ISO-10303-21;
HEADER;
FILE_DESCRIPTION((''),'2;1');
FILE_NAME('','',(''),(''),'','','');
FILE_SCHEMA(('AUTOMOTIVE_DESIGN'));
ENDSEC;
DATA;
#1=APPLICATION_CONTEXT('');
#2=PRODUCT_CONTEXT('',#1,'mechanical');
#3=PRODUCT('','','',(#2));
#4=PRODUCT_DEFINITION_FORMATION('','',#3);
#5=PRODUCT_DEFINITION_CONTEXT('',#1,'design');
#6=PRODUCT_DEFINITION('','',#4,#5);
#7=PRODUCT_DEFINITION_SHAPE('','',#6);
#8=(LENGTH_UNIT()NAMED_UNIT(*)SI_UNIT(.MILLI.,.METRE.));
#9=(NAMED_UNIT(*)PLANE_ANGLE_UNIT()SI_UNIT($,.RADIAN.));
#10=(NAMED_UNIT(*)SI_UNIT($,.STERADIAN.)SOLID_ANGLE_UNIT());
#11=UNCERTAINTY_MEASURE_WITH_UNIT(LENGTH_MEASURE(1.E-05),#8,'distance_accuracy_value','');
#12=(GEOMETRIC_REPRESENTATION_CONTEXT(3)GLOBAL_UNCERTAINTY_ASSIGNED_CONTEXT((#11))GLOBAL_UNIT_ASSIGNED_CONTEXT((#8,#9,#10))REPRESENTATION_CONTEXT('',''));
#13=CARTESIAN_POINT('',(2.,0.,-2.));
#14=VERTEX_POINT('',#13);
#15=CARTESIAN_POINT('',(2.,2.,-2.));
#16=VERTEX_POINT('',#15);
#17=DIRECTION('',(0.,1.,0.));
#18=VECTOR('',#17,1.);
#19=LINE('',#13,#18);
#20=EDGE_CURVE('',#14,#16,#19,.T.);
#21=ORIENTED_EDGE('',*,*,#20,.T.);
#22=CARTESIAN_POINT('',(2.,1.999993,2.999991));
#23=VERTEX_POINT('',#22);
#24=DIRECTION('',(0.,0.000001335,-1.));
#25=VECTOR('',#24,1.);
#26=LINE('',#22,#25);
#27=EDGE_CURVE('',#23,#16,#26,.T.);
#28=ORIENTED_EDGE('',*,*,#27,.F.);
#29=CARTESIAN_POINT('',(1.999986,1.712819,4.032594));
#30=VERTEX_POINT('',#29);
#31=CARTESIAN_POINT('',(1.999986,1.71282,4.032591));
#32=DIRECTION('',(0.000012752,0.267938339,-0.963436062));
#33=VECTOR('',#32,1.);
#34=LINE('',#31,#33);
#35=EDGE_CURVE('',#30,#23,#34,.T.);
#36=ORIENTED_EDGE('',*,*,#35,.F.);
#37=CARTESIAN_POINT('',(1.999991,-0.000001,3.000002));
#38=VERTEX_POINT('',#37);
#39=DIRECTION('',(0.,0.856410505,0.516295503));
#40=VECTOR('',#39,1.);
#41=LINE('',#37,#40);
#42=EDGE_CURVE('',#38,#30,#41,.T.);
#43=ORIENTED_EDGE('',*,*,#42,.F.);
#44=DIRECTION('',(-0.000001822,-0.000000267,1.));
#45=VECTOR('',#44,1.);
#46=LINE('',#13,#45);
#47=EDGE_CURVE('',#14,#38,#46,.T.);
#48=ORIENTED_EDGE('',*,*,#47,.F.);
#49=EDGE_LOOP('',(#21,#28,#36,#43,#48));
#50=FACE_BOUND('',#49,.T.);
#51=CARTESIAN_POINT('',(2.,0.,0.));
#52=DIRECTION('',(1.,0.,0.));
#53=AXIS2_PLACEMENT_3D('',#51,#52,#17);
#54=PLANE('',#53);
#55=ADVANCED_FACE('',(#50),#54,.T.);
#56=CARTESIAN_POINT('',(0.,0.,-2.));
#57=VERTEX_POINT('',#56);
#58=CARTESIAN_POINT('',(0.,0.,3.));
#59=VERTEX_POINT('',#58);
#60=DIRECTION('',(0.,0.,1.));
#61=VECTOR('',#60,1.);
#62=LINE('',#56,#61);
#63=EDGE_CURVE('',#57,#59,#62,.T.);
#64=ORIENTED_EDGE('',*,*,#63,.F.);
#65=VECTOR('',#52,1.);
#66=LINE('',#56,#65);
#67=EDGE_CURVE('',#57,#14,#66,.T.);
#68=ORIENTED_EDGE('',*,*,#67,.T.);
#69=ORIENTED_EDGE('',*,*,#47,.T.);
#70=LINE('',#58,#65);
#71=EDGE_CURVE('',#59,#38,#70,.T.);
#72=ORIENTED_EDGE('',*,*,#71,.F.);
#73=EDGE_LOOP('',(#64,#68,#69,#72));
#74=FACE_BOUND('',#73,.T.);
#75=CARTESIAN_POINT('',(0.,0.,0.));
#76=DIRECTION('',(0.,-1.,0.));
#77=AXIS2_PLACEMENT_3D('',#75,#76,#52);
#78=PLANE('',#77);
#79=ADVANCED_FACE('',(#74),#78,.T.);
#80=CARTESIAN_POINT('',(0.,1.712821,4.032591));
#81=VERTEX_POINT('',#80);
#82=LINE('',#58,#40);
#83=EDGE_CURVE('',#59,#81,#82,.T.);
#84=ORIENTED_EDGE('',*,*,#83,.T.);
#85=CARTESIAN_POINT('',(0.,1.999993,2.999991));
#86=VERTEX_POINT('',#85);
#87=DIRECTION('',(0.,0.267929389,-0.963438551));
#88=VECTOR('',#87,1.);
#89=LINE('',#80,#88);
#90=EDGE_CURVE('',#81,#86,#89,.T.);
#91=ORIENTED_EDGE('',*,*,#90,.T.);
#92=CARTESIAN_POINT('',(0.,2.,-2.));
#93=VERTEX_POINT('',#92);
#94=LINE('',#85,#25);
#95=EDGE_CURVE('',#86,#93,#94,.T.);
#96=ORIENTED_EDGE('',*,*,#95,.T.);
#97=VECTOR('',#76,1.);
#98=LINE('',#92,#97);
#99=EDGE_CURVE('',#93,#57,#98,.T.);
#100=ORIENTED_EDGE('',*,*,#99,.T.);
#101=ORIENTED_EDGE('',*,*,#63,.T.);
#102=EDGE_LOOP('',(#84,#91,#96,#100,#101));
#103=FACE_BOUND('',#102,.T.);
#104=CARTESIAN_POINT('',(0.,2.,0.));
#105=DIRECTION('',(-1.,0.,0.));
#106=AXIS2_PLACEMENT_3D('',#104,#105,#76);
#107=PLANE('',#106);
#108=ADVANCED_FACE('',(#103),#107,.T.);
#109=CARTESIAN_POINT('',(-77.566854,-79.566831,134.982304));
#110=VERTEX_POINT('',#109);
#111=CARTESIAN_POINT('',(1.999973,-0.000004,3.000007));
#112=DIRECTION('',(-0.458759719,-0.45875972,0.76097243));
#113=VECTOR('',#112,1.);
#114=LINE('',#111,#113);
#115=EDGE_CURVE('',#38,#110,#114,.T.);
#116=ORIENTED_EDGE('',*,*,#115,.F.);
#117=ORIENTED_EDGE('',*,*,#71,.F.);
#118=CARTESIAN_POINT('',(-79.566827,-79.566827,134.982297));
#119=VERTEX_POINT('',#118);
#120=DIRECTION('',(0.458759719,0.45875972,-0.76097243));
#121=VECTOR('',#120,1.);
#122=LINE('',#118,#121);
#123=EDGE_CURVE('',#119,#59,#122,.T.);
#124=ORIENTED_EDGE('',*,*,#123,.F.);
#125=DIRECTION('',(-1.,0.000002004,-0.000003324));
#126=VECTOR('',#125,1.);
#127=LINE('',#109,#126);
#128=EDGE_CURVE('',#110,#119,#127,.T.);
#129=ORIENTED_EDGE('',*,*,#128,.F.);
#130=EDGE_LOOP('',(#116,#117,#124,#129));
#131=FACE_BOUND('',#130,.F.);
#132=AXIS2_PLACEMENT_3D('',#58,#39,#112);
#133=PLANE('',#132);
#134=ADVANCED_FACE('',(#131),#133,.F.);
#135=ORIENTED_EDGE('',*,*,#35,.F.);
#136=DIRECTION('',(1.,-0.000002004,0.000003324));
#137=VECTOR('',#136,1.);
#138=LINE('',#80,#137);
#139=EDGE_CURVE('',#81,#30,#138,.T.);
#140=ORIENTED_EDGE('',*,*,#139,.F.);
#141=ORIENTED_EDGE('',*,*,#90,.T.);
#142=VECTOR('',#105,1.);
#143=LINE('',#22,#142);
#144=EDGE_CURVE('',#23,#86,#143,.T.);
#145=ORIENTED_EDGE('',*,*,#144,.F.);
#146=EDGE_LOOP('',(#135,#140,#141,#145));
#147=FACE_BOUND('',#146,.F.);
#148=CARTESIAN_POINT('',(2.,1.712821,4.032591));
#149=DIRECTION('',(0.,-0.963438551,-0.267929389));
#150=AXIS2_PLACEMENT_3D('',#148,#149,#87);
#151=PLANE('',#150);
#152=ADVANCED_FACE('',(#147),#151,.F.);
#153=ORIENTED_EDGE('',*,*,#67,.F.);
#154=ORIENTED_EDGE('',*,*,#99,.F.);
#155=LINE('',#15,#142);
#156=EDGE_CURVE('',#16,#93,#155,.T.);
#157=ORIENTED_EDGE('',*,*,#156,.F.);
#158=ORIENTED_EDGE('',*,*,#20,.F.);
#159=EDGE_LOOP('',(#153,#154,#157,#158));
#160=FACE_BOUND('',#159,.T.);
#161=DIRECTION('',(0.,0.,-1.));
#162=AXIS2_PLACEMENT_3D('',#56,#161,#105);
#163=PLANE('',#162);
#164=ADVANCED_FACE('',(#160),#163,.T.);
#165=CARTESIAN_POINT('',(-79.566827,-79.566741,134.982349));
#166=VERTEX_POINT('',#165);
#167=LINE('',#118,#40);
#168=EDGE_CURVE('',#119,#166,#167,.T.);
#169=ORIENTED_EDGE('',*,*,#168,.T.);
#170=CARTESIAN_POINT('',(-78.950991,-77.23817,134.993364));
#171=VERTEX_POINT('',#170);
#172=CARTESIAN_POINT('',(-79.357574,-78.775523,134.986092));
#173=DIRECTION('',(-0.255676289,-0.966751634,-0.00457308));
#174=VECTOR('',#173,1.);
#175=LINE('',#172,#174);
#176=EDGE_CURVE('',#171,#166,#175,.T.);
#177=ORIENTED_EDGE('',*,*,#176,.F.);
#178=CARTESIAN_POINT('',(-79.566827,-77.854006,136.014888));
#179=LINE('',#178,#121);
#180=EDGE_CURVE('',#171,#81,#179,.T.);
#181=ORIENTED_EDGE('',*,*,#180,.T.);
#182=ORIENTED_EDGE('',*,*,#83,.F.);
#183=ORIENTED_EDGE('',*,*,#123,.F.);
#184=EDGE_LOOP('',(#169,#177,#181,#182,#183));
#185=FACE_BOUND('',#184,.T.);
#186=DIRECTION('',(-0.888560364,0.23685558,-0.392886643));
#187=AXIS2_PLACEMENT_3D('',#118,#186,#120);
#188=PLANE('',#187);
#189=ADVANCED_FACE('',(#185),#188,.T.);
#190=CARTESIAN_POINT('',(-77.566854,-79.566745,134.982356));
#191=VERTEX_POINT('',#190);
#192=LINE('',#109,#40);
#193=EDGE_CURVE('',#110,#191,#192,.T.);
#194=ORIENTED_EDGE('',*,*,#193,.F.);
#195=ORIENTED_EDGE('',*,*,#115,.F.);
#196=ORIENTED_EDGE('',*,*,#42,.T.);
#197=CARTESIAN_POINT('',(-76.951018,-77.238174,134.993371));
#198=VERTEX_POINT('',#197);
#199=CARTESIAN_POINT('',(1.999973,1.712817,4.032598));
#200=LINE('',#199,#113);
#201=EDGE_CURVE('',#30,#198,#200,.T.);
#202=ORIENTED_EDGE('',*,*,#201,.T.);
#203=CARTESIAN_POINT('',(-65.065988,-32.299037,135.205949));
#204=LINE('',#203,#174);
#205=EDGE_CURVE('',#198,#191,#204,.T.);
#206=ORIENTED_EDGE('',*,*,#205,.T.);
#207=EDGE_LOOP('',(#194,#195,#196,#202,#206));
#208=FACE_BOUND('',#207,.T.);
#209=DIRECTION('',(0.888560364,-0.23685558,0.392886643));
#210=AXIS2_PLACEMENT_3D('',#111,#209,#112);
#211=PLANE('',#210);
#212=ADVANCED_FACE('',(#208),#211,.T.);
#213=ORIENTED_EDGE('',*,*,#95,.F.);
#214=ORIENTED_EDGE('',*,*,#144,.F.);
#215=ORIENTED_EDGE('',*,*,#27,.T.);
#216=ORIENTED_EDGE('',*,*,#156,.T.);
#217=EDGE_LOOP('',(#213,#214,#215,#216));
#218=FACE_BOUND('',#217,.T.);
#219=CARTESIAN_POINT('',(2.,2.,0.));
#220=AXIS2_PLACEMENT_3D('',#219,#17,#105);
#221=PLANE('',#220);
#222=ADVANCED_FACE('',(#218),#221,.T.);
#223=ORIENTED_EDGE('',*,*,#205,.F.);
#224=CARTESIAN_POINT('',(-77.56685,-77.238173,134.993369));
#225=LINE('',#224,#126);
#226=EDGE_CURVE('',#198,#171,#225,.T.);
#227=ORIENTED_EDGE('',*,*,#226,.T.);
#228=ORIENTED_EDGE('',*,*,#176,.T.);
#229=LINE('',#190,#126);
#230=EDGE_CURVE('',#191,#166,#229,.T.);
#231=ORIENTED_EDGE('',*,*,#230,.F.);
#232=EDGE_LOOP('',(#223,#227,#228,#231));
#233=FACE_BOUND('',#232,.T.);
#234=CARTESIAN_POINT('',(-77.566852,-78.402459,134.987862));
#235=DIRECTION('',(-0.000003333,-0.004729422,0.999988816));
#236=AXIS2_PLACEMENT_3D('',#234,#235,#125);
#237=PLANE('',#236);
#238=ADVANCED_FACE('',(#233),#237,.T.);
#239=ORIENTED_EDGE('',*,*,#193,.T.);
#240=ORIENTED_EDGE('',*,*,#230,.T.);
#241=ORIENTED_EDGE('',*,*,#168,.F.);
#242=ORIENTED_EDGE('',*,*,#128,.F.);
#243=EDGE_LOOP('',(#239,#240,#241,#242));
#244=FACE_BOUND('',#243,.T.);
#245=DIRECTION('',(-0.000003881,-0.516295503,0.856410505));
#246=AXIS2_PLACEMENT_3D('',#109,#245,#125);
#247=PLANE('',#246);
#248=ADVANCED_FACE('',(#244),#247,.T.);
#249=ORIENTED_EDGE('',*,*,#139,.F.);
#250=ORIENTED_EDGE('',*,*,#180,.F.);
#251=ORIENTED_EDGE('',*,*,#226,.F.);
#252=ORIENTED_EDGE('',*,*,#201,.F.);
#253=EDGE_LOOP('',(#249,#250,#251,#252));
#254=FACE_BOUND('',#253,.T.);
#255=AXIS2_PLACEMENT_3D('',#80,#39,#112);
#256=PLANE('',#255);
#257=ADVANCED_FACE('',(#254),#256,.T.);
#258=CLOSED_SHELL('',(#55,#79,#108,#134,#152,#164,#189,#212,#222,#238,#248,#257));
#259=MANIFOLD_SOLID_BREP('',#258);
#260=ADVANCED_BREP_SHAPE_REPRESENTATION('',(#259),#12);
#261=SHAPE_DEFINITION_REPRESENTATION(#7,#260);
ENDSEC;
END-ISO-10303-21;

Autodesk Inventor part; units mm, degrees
ref_plane "YZ Plane" through (0, 0, 0) normal (1, 0, 0) x (0, 1, 0)
sketch "Skizze1" plane through (0, 0, 0) normal (0, 0, 1) x (1, 0, 0)
  line L0 (0, 0) -> (2, 0)
  line L1 (2, 0) -> (2, 2)
  line L2 (2, 2) -> (0, 2)
  line L3 (0, 2) -> (0, 0)
  dimension "d0" = 2
  dimension "d1" = 2
extrude "Extrusion1" add sketch "Skizze1" along normal blind 3
sketch "Skizze2" plane through (0, 0, 3) normal (0, 0, 1) x (1, 0, 0)
  point P0 (0, 0)
ref_plane "Arbeitsebene1" through (0, 0, 3) normal (-0.7071068, 0.7071068, 0) x (0.7071068, 0.7071068, 0)
sketch "Skizze3" plane through (0, 0, 3) normal (-0.7071068, 0.7071068, 0) x (0.7071068, 0.7071068, 0)
  line L0 (0, 0) -> (1.4142, 0) projected
  line L1 (0, 0) -> (-112.5245, -131.9823)
  line L2 (0, 0) -> (173.439, 0) construction
  line L3 (2.8284, 3) -> (2.8284, 0) projected
  line L4 (2.8284, 0) -> (-109.6961, -131.9823)
  line L5 (2.8284, 0) -> (176.2674, 0) construction
  line L6 (-109.6961, -131.9823) -> (-112.5245, -131.9823)
  line L7 (1.4142, 0) -> (2.8284, 0) projected
  line L8 (2.8284, 0) -> (0, 0)
  point P0 (0, 3)
  dimension "d4" = 173.439
  dimension "d5" = 130.45
  dimension "d6" = 173.439
  dimension "d7" = 130.45
ref_plane "Arbeitsebene2" through (0, 0, 3) normal (0, 0.8564105, 0.5162955) x (-0.4587597, -0.4587597, 0.7609724)
sketch "Skizze4" plane through (0, 0, 3) normal (0, 0.8564105, 0.5162955) x (-0.4587597, -0.4587597, 0.7609724)
  line L0 (0, 0) -> (-0.9175, 1.7771) projected
  line L1 (0, 0) -> (-0.9175, 1.7771)
  line L2 (-0.9175, 1.7771) -> (172.5215, 1.7771)
  line L3 (172.5215, 1.7771) -> (173.439, 0)
  line L4 (173.439, 0) -> (0, 0)
  point P0 (-2.2829, -1.1787)
  dimension "d9" = 173.439
extrude "Extrusion2" add sketch "Skizze4" along normal blind 2
sketch "Skizze5" plane through (-77.5668, -79.5668, 134.9823) normal (0.8885604, -0.2368556, 0.3928866) x (0.4587597, 0.4587597, -0.7609724)
  line L0 (172.5215, 0) -> (-0.9175, 0) projected
  line L1 (0.0005, 0) -> (1.3553, 2)
  line L2 (0, 2) -> (173.439, 2) projected
  line L3 (1.3553, 2) -> (0, 2)
  line L4 (0, 0) -> (0, 2) projected
  line L5 (0, 2) -> (0, 0)
  point P0 (174.8044, -1.5489)
sketch "Skizze6" plane through (0, 0, 3) normal (0, -0.8564105, -0.5162955) x (0.8885604, -0.2368556, 0.3928866)
  line L0 (0, 0) -> (0, 173.439) projected
  line L1 (1.7771, 172.5215) -> (0, 173.439)
  point P0 (-1.1787, -2.2829)
sketch "Skizze7" plane through (0, 1.7128, 4.0326) normal (0, 0.8564105, 0.5162955) x (0.8885604, -0.2368556, 0.3928866)
  line L0 (0, 0) -> (0, -173.439) projected
  line L1 (0, -172.1027) -> (1.781, -171.1647)
  point P0 (-1.1787, 2.2829)
sketch "Skizze8" plane through (0, 0, 3) normal (-0.8885604, 0.2368556, -0.3928866) x (-0.4587597, -0.4587597, 0.7609724)
  line L0 (0, 2) -> (173.439, 2) projected
  line L1 (0, 0) -> (173.439, 0) projected
  line L2 (172.1026, 2) -> (173.439, 0)
  point P0 (-2.2829, -1.5489)
chamfer "Fase1" distance 1.1929 distance2 2 1 edges at (-78.5668, -77.854, 136.0149) measured on face at (-25.1889, -24.8095, 48.0267)
ref_plane "Arbeitsebene3" through (2, 0, 3) normal (-1, 0, 0) x (0, 0.8564105, 0.5162955)
sketch "Skizze12" plane through (2, 0, 3) normal (-1, 0, 0) x (0, 0.8564105, 0.5162955)
  line L0 (0, 0) -> (1.7128, 1.0326) projected
  line L1 (0, 0) -> (2, 0)
  line L2 (-1.5489, 2.5692) -> (0, 0) projected
  line L3 (0, 0) -> (1.7128, 1.0326)
  line L4 (2, 0) -> (1.7128, 1.0326)
extrude "Extrusion6" add sketch "Skizze12" along normal blind 2
sketch "Skizze13" plane through (0, 0, 0) normal (0, 0, -1) x (-1, 0, 0)
  line L0 (0, 2) -> (0, 0) projected
  line L1 (-2, 0) -> (-2, 2) projected
  line L2 (0, 0) -> (-2, 0)
  line L3 (-2, 0) -> (-2, 2)
  line L4 (-2, 2) -> (0, 2)
  line L5 (0, 2) -> (0, 0)
extrude "Extrusion7" add sketch "Skizze13" along normal blind 2
properties part number "FOVStick"
